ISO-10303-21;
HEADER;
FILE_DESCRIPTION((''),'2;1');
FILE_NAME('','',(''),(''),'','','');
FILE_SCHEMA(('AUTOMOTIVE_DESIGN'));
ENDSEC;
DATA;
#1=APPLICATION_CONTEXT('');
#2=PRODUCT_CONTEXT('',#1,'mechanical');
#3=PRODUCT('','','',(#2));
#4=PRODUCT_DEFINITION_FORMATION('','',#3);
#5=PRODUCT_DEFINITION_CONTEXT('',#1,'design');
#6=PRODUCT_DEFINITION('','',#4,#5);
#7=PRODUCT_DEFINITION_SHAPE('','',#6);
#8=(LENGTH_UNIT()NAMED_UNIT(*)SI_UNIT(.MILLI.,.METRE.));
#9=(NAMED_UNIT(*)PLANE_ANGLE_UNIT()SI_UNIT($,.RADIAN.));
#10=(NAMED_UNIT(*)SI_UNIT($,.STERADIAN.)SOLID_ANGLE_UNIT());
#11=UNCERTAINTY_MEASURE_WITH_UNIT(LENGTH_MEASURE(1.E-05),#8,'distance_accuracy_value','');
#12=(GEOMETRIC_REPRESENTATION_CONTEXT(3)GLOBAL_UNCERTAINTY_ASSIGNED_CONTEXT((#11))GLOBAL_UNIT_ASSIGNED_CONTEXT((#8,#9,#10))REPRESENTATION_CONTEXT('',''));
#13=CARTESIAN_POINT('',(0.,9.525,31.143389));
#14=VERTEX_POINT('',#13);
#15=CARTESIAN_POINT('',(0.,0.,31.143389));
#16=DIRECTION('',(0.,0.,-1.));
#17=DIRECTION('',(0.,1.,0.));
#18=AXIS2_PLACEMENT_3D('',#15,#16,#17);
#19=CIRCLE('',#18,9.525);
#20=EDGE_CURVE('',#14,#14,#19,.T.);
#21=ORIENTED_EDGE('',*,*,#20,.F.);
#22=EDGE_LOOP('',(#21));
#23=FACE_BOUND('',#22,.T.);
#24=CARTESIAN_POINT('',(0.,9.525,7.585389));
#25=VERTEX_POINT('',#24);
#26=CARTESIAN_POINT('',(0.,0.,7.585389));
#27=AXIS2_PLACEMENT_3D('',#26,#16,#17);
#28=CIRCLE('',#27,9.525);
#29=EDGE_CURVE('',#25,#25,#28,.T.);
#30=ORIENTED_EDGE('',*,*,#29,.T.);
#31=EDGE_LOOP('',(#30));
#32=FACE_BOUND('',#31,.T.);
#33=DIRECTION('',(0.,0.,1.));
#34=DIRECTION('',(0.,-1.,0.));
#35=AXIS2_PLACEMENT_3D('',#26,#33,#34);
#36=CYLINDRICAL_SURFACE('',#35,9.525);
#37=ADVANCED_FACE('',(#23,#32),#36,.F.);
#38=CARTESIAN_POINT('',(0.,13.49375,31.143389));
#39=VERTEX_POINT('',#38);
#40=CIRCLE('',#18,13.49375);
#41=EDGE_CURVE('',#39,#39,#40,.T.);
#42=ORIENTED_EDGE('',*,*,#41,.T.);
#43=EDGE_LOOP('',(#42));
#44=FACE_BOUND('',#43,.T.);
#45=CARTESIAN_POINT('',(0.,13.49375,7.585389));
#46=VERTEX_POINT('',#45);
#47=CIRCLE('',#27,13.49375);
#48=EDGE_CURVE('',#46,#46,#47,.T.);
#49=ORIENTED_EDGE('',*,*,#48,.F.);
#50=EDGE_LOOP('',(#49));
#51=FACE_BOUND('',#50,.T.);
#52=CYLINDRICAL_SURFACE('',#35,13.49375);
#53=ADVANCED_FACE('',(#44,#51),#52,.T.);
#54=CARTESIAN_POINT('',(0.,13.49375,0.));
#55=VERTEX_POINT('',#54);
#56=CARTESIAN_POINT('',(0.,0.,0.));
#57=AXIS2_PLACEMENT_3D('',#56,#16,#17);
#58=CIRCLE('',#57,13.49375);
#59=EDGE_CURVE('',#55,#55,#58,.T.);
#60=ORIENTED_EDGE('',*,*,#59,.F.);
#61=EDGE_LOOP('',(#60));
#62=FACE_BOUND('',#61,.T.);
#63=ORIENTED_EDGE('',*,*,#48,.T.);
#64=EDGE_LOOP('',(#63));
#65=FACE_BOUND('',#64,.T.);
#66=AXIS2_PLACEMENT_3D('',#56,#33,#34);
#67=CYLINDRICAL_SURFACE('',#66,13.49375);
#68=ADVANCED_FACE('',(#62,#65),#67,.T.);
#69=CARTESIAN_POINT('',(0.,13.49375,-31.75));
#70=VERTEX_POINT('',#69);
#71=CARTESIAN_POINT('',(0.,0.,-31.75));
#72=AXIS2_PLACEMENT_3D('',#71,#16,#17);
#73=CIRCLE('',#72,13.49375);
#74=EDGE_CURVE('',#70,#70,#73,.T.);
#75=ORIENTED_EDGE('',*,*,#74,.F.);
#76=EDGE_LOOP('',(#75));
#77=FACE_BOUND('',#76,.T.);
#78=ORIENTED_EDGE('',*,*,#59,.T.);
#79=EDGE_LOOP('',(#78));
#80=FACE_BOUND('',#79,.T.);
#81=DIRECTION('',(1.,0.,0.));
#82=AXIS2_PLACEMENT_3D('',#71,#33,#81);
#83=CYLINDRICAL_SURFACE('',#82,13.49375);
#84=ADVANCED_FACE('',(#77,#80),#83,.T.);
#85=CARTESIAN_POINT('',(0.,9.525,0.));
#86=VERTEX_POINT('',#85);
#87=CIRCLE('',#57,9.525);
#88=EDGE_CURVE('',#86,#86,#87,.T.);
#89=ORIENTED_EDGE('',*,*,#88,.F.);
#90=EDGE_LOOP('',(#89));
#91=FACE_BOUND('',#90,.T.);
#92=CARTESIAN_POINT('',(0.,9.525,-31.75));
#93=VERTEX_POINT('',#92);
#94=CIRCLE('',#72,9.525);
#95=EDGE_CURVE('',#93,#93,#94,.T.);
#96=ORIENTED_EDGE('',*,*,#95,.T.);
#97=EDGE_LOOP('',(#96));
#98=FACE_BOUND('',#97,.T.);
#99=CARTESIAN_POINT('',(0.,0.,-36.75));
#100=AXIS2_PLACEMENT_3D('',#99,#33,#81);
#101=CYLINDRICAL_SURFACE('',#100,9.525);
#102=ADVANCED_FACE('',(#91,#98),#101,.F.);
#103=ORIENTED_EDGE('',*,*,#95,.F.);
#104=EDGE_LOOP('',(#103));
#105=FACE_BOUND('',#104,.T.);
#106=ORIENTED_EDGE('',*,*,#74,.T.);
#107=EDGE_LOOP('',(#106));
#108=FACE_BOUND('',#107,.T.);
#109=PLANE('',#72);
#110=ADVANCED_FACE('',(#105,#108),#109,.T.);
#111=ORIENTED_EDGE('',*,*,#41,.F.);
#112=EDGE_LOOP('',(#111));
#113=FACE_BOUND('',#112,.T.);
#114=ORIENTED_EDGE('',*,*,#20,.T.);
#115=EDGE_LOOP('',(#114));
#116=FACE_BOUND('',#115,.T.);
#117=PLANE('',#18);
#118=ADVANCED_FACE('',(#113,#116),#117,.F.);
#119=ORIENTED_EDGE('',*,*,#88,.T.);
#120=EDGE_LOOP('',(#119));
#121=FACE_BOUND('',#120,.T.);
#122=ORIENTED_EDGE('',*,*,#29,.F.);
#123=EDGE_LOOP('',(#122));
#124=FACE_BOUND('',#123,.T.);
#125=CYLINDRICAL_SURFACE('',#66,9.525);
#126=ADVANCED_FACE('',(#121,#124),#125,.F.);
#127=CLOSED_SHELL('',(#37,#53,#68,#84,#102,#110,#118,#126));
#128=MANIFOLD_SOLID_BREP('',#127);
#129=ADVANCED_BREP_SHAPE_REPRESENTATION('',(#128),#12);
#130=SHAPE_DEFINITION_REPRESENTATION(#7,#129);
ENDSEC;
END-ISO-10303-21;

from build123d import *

# Parameters (mm, degrees)
SWEEP1_PROFILE_R     = 13.49375
CUT_SWEEP1_START     = -31.75
CUT_SWEEP1_OUTLINE_R = 9.525
CUT_SWEEP1_DEPTH     = 62.893389273


# Read off the part's stored shape, not the designer's step: Cut-Sweep1
with BuildPart() as part:
    # Sweep1: sweep along a curve in space
    with BuildLine() as sweep1_path:
        Line((0, 0, 0), (0, 0, -31.75))
        Line((0, 0, 0), (0, 0, 7.585389273))
        Line((0, 0, 7.585389273), (0, 0, 31.143389273))
    # Sweep1 profile (on start of the path) → Sweep1 (sweep)
    with BuildSketch(Plane(origin=(0, 0, 31.143389273), x_dir=(0, -1, 0), z_dir=(0, 0, -1))):
        Circle(SWEEP1_PROFILE_R)
    sweep(path=sweep1_path.line)

    # Cut-Sweep1 outline → Cut-Sweep1 (cut)
    with BuildSketch(Plane.XY.offset(CUT_SWEEP1_START)):
        Circle(CUT_SWEEP1_OUTLINE_R)
    extrude(amount=CUT_SWEEP1_DEPTH, mode=Mode.SUBTRACT)


solid = part.part
